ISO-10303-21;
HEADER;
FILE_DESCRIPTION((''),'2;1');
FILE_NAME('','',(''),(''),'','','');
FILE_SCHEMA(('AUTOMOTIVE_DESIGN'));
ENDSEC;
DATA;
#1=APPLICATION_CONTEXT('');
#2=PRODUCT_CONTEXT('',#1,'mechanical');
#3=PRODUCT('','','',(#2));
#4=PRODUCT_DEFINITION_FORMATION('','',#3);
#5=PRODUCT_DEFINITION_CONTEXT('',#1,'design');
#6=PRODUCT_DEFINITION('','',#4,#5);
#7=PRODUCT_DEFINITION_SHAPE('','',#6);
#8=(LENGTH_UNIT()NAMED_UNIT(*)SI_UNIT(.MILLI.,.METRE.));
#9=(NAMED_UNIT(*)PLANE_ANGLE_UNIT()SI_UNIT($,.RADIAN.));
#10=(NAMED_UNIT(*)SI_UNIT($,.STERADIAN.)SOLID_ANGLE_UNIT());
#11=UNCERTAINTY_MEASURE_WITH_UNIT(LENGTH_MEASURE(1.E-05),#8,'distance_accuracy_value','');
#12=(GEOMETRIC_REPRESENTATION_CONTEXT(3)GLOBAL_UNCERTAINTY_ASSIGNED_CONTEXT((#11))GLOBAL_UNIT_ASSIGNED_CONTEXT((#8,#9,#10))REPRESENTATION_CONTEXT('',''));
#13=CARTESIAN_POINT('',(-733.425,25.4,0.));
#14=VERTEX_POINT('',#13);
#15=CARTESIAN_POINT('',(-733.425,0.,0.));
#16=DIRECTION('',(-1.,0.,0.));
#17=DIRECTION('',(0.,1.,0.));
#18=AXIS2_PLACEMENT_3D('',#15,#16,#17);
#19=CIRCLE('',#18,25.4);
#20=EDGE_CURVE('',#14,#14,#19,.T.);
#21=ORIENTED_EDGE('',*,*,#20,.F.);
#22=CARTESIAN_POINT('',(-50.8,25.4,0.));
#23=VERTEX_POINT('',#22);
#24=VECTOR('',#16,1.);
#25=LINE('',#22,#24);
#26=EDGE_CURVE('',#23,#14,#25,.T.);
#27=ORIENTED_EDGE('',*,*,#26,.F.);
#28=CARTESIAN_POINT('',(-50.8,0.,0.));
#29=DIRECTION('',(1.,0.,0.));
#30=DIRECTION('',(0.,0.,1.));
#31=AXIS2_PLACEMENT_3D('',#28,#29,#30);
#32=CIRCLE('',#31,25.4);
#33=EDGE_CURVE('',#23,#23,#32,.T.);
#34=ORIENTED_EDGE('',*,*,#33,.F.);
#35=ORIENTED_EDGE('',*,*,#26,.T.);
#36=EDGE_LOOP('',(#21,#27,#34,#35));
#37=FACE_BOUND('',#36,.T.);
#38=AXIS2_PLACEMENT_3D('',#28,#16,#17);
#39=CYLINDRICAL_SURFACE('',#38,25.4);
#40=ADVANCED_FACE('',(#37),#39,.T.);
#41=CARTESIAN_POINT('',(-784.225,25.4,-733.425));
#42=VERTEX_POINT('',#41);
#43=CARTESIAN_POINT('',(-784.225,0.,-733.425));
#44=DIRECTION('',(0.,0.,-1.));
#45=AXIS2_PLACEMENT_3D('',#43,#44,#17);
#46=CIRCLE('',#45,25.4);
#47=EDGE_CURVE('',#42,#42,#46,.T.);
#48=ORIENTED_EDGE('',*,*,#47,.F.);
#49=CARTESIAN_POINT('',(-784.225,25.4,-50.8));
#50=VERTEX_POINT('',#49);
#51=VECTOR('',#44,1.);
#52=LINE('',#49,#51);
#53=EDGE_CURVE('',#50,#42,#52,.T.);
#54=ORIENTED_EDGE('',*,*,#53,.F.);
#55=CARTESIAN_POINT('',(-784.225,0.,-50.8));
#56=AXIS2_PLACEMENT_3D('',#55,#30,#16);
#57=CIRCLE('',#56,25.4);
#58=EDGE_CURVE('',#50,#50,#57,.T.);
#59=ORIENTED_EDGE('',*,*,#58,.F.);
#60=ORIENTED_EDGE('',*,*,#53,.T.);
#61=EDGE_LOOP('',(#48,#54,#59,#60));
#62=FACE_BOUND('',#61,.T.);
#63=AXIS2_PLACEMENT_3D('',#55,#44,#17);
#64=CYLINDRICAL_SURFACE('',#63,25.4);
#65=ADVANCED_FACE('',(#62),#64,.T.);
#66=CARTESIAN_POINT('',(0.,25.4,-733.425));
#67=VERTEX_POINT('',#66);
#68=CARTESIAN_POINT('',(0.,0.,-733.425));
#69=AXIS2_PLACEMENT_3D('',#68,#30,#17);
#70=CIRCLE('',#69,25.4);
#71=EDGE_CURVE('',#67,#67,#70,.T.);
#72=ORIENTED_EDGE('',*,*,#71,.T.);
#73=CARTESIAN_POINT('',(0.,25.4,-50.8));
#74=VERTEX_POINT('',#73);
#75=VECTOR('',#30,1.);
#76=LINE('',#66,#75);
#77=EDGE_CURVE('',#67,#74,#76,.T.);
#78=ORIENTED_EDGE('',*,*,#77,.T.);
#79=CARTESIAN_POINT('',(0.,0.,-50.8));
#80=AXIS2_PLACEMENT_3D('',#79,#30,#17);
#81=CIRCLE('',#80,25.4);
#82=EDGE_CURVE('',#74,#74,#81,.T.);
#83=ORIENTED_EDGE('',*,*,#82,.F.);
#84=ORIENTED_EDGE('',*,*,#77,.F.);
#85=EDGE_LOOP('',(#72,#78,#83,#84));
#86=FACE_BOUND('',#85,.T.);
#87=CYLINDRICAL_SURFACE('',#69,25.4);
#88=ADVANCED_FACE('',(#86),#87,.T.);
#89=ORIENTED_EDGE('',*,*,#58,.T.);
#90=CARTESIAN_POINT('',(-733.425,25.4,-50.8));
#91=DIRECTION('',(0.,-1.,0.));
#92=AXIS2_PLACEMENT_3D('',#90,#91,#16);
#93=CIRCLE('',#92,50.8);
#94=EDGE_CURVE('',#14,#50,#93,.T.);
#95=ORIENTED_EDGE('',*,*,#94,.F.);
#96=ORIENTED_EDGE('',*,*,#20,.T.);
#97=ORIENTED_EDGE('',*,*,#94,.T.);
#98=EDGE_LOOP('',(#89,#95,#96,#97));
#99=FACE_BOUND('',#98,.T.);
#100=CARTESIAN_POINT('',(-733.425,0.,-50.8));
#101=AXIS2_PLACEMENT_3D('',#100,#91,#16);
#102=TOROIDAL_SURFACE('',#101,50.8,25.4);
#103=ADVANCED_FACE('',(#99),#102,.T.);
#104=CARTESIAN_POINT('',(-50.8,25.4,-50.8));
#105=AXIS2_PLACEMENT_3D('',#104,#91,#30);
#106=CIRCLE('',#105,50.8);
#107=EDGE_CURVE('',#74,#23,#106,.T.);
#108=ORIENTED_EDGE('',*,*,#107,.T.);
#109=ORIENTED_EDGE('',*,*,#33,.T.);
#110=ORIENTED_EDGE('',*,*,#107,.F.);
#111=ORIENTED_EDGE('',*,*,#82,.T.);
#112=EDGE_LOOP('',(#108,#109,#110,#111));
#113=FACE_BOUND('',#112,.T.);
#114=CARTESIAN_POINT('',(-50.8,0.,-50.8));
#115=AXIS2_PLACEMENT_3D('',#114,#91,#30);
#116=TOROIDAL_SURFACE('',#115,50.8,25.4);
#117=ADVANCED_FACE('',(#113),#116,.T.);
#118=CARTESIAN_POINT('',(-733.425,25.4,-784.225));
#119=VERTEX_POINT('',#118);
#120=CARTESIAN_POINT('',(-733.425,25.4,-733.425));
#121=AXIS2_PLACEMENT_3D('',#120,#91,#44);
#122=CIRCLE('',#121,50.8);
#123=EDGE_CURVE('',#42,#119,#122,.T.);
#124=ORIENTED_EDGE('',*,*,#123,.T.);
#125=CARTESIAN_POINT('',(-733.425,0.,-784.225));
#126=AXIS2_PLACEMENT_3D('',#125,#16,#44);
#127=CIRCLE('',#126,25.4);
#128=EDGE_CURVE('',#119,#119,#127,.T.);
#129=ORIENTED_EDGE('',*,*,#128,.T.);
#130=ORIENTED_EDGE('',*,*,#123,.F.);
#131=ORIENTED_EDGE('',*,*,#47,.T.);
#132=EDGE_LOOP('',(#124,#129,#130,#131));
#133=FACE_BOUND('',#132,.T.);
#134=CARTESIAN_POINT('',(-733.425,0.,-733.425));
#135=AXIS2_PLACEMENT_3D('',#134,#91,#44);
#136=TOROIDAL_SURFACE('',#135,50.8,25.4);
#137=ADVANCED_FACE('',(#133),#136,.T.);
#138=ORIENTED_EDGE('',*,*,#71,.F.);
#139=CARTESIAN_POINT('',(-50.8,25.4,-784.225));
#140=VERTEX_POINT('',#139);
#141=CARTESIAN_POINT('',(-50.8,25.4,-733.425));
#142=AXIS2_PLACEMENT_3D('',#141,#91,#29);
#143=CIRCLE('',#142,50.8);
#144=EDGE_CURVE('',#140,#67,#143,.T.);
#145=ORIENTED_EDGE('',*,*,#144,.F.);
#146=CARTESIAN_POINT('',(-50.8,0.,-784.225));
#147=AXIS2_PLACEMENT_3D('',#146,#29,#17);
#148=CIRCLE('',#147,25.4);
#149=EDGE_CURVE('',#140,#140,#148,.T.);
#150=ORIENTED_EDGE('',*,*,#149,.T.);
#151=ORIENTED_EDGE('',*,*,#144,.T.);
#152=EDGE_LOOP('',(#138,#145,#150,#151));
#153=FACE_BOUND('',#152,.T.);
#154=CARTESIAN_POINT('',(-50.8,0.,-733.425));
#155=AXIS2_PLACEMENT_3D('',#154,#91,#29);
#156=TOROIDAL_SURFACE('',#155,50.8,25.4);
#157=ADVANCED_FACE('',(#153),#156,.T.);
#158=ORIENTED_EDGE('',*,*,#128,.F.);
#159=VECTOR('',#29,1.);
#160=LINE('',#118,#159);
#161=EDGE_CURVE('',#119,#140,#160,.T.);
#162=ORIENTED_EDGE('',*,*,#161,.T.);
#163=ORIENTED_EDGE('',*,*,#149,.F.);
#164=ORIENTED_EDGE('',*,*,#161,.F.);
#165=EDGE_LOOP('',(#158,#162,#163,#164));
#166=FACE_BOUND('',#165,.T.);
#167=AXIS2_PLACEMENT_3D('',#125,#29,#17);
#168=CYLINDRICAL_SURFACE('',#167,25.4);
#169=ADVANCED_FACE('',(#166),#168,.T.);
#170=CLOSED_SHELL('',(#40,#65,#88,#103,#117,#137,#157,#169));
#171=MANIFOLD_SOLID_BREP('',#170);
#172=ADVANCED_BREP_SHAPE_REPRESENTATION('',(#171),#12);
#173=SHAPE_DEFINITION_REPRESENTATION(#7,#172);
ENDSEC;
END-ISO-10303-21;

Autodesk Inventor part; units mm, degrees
ref_plane "XZ Plane" through (0, 0, 0) normal (0, 1, 0) x (-1, 0, 0)
ref_plane "XY Plane" through (0, 0, 0) normal (0, 0, 1) x (1, 0, 0)
sketch "Sketch1" plane through (0, 0, 0) normal (0, 1, 0) x (-1, 0, 0)
  line L0 (50.8, 0) -> (733.425, 0)
  line L1 (784.225, -50.8) -> (784.225, -733.425)
  line L2 (733.425, -784.225) -> (50.8, -784.225)
  line L3 (0, -733.425) -> (0, -50.8)
  arc A0 (784.225, -50.8) -> (733.425, 0) centre (733.425, -50.8) ccw
  arc A1 (733.425, -784.225) -> (784.225, -733.425) centre (733.425, -733.425) ccw
  arc A2 (0, -733.425) -> (50.8, -784.225) centre (50.8, -733.425) ccw
  arc A3 (50.8, 0) -> (0, -50.8) centre (50.8, -50.8) ccw
  point P0 (0, 0)
  point P1 (784.225, -784.225)
  point P2 (784.225, 0)
  point P3 (0, -784.225)
  dimension "d0" = 784.225
  dimension "d1" = 784.225
  dimension "d2" = 50.8
ref_plane "Work Plane1" through (-379.4125, 0, 0) normal (1, 0, 0) x (0, 1, 0)
sketch "Sketch2" plane through (-379.4125, 0, 0) normal (1, 0, 0) x (0, 1, 0)
  circle A0 centre (0, 0) radius 25.4
  dimension "d4" = 50.8
sweep "Sweep1" add profiles "Sketch2" path "Sketch1"
properties part number "Pool Noodles"
